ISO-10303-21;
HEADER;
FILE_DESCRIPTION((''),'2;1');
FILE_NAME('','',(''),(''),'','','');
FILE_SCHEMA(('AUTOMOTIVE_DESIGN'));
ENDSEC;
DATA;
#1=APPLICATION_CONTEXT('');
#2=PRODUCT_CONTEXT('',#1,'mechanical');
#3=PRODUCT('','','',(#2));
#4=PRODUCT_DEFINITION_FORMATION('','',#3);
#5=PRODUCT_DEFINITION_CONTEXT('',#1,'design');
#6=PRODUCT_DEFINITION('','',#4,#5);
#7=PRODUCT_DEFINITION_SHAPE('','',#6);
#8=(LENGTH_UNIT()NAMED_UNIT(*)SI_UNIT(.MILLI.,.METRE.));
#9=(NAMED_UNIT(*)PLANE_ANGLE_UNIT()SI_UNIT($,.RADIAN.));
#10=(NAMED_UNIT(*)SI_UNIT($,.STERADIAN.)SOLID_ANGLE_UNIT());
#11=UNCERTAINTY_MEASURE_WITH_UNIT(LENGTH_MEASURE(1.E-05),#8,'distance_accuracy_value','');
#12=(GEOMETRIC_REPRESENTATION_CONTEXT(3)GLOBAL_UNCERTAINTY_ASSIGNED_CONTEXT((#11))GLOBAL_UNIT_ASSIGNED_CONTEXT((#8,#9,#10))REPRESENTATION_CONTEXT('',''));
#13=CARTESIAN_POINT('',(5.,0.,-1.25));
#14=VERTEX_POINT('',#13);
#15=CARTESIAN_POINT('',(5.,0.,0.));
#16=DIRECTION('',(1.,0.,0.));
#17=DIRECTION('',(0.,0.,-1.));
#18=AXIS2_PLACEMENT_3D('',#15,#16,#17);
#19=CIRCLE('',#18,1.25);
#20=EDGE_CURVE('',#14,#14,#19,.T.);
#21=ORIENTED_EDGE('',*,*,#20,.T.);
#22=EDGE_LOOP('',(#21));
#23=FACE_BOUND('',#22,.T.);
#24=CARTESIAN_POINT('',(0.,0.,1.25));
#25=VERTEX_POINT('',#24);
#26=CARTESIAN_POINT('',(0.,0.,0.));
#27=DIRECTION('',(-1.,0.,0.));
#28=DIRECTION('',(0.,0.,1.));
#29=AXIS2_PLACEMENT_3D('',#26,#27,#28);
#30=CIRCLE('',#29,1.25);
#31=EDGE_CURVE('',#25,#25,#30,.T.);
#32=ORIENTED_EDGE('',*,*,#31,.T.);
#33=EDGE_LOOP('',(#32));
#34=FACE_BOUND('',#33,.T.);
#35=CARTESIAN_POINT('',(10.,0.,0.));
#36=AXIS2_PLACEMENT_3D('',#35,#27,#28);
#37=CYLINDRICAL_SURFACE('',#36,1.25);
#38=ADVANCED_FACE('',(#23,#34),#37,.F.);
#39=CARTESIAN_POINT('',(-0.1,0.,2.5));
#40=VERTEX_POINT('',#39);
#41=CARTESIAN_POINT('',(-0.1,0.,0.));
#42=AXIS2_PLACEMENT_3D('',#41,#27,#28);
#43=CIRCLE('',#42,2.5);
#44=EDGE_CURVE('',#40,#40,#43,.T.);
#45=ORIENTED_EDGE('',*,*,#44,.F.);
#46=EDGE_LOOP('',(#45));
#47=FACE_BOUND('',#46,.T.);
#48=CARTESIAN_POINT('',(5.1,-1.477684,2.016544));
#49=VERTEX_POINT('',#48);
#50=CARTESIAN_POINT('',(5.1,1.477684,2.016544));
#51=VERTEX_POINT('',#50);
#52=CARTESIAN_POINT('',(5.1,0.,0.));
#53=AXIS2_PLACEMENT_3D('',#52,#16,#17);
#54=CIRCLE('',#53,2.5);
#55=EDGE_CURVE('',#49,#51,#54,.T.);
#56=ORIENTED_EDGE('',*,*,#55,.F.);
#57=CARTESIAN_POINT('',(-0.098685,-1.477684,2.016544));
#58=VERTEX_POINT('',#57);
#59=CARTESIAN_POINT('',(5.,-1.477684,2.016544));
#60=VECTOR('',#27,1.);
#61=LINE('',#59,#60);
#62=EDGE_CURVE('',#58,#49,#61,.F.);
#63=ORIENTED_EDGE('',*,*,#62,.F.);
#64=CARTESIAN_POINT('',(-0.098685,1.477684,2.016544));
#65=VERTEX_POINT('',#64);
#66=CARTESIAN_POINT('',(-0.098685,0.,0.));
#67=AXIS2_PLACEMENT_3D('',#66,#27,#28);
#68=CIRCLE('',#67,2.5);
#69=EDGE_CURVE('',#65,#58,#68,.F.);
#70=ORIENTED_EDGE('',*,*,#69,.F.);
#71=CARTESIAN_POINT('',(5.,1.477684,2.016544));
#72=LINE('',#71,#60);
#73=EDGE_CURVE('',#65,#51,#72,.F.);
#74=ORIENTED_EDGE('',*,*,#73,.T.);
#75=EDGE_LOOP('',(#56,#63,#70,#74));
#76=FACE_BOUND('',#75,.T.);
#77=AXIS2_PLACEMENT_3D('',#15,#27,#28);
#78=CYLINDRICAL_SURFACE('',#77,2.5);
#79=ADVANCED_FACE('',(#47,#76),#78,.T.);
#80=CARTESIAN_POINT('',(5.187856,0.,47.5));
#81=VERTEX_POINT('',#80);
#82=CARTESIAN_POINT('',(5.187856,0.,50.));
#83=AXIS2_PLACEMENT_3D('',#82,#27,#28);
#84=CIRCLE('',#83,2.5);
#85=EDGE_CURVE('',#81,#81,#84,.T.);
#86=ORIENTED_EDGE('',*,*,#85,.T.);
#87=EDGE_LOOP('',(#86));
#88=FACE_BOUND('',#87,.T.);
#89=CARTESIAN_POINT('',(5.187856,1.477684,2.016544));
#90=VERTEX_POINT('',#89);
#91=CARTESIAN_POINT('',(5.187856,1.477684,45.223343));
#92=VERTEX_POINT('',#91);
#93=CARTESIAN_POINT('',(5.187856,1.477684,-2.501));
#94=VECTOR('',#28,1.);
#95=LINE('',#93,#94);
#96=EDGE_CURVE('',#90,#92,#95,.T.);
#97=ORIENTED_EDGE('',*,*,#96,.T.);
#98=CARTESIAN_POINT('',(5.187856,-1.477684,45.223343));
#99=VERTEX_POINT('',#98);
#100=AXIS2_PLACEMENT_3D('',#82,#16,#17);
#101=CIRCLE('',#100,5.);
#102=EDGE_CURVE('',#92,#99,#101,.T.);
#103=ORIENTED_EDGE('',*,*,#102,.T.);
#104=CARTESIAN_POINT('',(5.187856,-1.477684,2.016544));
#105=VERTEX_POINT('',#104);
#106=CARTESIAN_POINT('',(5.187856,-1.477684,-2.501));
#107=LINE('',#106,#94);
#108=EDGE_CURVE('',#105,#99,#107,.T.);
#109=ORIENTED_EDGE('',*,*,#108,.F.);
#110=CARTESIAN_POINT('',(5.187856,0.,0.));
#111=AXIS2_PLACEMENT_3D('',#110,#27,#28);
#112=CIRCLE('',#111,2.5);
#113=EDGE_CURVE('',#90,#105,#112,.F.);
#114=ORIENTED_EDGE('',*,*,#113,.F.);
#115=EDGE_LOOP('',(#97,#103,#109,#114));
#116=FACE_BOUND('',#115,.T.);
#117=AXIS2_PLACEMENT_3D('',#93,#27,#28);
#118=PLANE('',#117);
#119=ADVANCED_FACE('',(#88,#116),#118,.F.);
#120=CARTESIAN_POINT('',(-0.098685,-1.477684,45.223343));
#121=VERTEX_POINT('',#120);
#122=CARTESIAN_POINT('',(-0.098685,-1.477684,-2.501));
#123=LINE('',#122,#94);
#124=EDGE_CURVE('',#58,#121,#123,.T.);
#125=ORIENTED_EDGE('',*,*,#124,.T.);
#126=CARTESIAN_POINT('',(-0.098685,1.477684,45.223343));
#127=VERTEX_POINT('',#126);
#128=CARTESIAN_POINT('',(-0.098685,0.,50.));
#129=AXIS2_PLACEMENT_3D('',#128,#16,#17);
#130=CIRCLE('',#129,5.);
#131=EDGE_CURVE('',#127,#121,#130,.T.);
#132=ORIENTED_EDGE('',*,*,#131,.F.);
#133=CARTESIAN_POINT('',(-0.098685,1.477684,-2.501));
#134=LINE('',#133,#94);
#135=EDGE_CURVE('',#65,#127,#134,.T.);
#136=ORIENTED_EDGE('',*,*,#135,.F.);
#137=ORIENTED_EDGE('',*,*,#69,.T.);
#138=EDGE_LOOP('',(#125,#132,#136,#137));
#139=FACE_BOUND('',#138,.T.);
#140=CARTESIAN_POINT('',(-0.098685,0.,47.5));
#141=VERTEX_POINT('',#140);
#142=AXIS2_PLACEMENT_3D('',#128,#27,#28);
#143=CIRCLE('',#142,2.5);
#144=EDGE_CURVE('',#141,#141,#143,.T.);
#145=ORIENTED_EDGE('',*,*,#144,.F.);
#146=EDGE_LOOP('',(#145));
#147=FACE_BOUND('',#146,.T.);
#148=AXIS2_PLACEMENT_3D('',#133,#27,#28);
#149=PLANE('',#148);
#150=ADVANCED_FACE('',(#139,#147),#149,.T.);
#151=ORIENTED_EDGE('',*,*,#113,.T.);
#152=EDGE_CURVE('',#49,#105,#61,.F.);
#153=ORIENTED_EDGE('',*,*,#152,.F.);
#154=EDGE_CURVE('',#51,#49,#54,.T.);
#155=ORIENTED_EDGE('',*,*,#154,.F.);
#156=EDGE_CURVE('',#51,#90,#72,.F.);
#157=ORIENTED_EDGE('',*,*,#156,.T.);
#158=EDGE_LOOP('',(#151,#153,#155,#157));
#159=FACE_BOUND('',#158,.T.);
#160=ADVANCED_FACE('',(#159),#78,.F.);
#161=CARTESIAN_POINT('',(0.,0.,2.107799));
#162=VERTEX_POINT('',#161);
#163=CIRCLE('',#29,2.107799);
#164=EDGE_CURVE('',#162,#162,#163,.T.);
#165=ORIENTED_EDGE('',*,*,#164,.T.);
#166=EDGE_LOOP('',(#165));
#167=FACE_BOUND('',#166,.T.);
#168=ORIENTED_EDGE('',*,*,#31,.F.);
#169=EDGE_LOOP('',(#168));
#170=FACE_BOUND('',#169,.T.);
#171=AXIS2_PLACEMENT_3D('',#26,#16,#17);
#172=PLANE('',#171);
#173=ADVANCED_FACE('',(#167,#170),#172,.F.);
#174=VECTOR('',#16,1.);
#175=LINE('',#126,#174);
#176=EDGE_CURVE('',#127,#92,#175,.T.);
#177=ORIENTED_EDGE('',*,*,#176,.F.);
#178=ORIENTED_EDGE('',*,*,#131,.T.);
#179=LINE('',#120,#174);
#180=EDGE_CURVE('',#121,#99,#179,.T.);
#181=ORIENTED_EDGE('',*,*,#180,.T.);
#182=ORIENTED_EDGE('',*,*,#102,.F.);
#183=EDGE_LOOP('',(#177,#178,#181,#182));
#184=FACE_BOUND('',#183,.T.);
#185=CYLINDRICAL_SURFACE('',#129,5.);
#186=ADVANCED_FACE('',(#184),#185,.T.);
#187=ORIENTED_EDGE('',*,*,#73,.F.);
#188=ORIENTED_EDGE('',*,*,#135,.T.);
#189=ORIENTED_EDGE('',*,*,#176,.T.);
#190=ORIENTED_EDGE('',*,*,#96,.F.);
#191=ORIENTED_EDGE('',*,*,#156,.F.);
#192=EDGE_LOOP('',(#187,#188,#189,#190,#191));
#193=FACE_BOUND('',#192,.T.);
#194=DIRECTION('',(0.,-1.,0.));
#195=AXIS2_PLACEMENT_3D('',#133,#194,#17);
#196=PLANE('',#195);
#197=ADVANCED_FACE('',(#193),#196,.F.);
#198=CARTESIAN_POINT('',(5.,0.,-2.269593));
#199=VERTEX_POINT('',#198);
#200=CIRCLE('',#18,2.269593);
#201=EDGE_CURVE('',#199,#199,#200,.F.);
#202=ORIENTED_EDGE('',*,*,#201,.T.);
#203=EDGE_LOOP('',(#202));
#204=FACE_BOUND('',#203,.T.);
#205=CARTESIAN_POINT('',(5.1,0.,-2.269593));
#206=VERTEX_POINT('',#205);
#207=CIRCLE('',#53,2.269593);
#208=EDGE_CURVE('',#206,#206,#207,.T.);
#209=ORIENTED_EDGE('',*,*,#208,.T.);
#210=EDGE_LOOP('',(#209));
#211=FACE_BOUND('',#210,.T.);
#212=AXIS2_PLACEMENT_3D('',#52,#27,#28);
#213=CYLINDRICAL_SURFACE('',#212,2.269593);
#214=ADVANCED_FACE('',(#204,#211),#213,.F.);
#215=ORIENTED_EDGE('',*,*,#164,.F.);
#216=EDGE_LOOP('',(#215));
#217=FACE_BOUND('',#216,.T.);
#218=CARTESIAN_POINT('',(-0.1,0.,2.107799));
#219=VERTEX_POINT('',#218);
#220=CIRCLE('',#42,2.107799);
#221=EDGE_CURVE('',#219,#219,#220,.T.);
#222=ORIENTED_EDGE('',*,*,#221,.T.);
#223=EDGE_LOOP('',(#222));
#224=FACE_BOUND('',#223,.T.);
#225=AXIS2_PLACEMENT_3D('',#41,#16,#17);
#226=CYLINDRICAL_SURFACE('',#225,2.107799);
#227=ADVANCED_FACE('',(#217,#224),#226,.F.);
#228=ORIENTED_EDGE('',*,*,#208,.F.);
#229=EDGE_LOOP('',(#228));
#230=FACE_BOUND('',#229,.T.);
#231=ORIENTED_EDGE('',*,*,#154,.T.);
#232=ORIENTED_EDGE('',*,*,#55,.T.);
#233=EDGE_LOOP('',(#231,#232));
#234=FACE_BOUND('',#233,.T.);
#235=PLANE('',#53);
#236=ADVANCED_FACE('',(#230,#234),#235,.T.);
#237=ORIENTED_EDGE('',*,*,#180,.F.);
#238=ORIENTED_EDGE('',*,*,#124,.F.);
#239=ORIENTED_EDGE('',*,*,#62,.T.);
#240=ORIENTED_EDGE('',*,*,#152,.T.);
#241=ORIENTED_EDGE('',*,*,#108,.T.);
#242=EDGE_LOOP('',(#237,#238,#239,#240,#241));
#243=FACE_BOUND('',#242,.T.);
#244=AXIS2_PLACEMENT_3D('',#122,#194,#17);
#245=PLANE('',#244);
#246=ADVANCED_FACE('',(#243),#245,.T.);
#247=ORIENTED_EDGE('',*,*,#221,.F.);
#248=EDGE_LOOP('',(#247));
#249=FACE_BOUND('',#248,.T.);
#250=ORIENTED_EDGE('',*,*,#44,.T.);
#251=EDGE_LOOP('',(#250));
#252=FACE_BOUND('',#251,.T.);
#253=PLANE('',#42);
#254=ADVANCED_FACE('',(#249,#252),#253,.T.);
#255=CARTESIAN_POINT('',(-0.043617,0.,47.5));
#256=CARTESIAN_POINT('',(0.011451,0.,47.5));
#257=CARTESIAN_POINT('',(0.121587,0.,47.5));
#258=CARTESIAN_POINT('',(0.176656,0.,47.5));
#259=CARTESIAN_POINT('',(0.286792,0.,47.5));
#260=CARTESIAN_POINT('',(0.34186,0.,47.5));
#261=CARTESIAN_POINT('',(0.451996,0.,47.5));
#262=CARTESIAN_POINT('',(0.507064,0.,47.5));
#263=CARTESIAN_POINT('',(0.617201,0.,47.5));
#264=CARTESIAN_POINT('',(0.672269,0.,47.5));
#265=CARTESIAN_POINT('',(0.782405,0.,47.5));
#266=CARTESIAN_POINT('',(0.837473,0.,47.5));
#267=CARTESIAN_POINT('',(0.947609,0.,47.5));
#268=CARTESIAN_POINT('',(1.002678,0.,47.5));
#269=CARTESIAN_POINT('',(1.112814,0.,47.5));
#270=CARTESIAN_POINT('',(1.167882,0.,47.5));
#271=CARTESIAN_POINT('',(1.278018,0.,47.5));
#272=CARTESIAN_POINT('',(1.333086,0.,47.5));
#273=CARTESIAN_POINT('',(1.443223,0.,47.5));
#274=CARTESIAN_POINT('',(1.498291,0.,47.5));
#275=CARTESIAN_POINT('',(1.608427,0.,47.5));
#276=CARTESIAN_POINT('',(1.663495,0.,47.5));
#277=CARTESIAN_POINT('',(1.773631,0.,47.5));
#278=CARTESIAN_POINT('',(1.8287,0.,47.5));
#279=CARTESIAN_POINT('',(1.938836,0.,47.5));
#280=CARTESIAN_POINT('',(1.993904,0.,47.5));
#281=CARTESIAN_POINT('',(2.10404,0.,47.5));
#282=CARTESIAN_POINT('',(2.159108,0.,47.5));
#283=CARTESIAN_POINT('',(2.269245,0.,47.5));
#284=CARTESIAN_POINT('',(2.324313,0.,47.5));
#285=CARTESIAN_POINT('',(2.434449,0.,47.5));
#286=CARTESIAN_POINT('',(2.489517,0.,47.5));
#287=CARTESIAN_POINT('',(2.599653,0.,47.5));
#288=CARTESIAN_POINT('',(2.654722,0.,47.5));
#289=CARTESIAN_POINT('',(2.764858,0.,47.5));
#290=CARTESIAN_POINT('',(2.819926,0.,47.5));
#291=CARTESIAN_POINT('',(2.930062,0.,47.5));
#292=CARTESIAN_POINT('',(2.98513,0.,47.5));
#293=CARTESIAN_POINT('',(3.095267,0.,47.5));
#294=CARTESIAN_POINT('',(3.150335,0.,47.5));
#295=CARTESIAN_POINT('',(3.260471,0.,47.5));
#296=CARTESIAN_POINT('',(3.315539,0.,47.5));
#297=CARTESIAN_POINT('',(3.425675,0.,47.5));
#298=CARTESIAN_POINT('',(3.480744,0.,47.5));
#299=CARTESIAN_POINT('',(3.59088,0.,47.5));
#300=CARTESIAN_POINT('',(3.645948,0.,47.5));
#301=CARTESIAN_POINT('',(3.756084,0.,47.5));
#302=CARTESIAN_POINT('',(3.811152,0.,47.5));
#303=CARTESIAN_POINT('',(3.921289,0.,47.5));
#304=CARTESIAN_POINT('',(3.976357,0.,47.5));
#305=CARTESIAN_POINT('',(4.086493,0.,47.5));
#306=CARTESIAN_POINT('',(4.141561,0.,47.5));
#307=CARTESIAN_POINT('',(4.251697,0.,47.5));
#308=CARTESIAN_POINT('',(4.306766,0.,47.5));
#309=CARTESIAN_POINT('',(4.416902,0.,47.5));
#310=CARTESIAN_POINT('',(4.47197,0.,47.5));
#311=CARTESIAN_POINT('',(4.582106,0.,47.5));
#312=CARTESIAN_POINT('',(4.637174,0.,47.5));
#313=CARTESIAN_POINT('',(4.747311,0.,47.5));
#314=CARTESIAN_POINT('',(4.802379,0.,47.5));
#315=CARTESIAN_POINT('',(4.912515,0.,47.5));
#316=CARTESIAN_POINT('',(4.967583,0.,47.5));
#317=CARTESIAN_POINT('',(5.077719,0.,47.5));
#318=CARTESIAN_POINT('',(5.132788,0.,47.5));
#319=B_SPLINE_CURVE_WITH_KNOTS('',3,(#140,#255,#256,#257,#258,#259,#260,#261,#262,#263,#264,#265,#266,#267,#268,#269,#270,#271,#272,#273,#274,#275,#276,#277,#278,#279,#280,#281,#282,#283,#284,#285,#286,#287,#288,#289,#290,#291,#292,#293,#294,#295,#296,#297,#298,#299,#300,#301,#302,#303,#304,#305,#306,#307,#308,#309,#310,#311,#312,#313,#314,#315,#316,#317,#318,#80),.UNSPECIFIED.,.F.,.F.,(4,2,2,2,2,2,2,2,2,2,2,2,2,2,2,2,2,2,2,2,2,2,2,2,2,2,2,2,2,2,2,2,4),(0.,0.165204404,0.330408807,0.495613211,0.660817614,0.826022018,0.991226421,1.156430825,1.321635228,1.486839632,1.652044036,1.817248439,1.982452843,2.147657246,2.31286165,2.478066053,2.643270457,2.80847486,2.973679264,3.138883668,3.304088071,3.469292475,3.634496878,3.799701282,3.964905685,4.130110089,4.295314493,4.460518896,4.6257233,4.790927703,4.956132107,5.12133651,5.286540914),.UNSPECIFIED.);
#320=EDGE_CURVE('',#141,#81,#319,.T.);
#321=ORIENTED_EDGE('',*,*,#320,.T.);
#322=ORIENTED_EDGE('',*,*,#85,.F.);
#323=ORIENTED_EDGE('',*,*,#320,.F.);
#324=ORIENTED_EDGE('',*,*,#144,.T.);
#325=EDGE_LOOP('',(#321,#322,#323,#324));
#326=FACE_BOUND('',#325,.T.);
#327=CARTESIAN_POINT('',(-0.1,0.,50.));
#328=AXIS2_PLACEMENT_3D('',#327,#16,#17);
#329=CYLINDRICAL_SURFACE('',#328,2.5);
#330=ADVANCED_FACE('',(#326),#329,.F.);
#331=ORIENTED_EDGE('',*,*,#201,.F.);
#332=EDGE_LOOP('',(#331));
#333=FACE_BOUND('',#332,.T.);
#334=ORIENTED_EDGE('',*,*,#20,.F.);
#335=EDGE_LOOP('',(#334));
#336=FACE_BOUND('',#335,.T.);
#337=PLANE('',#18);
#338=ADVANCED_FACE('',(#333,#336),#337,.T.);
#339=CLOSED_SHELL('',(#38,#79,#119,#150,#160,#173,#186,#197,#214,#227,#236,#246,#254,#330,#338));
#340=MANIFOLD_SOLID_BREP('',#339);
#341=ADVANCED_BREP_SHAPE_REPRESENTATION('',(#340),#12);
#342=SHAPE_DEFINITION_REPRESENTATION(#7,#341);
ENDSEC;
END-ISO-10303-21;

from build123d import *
from build123d.topology import SkipClean

# Parameters (mm, degrees)
SKETCH1_R               = 2.5
BOSS_EXTRUDE1_DEPTH     = 5
SKETCH2_R               = 1.25
CUT_EXTRUDE1_DEPTH      = 10
BOSS_EXTRUDE2_START     = 0.1
SKETCH4_R               = 2.5
SKETCH4_R_2             = 2.107798696
BOSS_EXTRUDE2_DEPTH     = 0.1
SKETCH5_R               = 2.5
SKETCH5_R_2             = 2.269592882
BOSS_EXTRUDE3_DEPTH     = 0.1
BOSS_EXTRUDE5_START     = -0.098685172
BOSS_EXTRUDE5_DEPTH     = 5.286540914
SKETCH12_W              = 5.286540914
SKETCH12_H              = 2.95536745
BOSS_EXTRUDE6_DEPTH     = 30
BOSS_EXTRUDE7_START     = -5.286541
SKETCH13_R              = 5
BOSS_EXTRUDE7_DEPTH     = 5.286541
CUT_EXTRUDE2_DEPTH      = 56.479378316
CUT_EXTRUDE2_DEPTH_BACK = 56.479378316
SKETCH14_R              = 2.5


# Read off the part's stored shape, not the designer's step: Boss-Extrude5
with BuildPart() as part:
    # Sketch1 → Boss-Extrude1 (new body)
    with BuildSketch(Plane(origin=(0, 0, 0), x_dir=(0, 0, -1), z_dir=(1, 0, 0))):
        Circle(SKETCH1_R)
    extrude(amount=BOSS_EXTRUDE1_DEPTH)

    # Sketch2 → Cut-Extrude1 (cut)
    with BuildSketch(Plane.ZY):
        Circle(SKETCH2_R)
    extrude(amount=-CUT_EXTRUDE1_DEPTH, mode=Mode.SUBTRACT)

    # Sketch4 → Boss-Extrude2 (add)
    with BuildSketch(Plane.ZY.offset(BOSS_EXTRUDE2_START)):
        Circle(SKETCH4_R)
        Circle(SKETCH4_R_2, mode=Mode.SUBTRACT)
    extrude(amount=-BOSS_EXTRUDE2_DEPTH)

    # Sketch5 → Boss-Extrude3 (add)
    with BuildSketch(Plane(origin=(5, 0, 0), x_dir=(0, 0, -1), z_dir=(1, 0, 0))):
        with Locations(Location((0, 0, 0), (0, 0, 180))):
            Circle(SKETCH5_R)
        Circle(SKETCH5_R_2, mode=Mode.SUBTRACT)
    extrude(amount=BOSS_EXTRUDE3_DEPTH)

    # Boss-Extrude5 outline → Boss-Extrude5 (add)
    with SkipClean():  # the faces are left unmerged after this step: merging them gives an invalid solid
        with BuildSketch(Plane.YZ.offset(BOSS_EXTRUDE5_START)):
            with BuildLine():
                Line((-1.477683725, 20), (-1.477683725, 2.016544274))
                ThreePointArc((-1.477683725, 2.016544274), (0, 2.5), (1.477683725, 2.016544274))
                Line((1.477683725, 2.016544274), (1.477683725, 20))
                Line((1.477683725, 20), (-1.477683725, 20))
            make_face()
        extrude(amount=BOSS_EXTRUDE5_DEPTH)

    # Sketch12 → Boss-Extrude6 (add)
    with SkipClean():  # the faces are left unmerged after this step: merging them gives an invalid solid
        with BuildSketch(Plane.XY.offset(20)):
            with Locations((2.544585285, 0)):
                Rectangle(SKETCH12_W, SKETCH12_H)
        extrude(amount=BOSS_EXTRUDE6_DEPTH)

    # Sketch13 → Boss-Extrude7 (add)
    with SkipClean():  # the faces are left unmerged after this step: merging them gives an invalid solid
        with BuildSketch(Plane(origin=(5.187855742, 0, 0), x_dir=(0, 0, -1), z_dir=(1, 0, 0)).offset(BOSS_EXTRUDE7_START)):
            with Locations((-50, 0)):
                Circle(SKETCH13_R)
        extrude(amount=BOSS_EXTRUDE7_DEPTH)

    # Sketch14 → Cut-Extrude2 (cut, two sides: drawn at the far end of the back side and taken through both)
    with SkipClean():  # the faces are left unmerged after this step: merging them gives an invalid solid
        with BuildSketch(Plane(origin=(5.187855742, 0, 0), x_dir=(0, 0, -1), z_dir=(1, 0, 0)).offset(-CUT_EXTRUDE2_DEPTH_BACK)):
            with Locations((-50, 0)):
                Circle(SKETCH14_R)
        extrude(amount=CUT_EXTRUDE2_DEPTH + CUT_EXTRUDE2_DEPTH_BACK, mode=Mode.SUBTRACT)


solid = part.part
